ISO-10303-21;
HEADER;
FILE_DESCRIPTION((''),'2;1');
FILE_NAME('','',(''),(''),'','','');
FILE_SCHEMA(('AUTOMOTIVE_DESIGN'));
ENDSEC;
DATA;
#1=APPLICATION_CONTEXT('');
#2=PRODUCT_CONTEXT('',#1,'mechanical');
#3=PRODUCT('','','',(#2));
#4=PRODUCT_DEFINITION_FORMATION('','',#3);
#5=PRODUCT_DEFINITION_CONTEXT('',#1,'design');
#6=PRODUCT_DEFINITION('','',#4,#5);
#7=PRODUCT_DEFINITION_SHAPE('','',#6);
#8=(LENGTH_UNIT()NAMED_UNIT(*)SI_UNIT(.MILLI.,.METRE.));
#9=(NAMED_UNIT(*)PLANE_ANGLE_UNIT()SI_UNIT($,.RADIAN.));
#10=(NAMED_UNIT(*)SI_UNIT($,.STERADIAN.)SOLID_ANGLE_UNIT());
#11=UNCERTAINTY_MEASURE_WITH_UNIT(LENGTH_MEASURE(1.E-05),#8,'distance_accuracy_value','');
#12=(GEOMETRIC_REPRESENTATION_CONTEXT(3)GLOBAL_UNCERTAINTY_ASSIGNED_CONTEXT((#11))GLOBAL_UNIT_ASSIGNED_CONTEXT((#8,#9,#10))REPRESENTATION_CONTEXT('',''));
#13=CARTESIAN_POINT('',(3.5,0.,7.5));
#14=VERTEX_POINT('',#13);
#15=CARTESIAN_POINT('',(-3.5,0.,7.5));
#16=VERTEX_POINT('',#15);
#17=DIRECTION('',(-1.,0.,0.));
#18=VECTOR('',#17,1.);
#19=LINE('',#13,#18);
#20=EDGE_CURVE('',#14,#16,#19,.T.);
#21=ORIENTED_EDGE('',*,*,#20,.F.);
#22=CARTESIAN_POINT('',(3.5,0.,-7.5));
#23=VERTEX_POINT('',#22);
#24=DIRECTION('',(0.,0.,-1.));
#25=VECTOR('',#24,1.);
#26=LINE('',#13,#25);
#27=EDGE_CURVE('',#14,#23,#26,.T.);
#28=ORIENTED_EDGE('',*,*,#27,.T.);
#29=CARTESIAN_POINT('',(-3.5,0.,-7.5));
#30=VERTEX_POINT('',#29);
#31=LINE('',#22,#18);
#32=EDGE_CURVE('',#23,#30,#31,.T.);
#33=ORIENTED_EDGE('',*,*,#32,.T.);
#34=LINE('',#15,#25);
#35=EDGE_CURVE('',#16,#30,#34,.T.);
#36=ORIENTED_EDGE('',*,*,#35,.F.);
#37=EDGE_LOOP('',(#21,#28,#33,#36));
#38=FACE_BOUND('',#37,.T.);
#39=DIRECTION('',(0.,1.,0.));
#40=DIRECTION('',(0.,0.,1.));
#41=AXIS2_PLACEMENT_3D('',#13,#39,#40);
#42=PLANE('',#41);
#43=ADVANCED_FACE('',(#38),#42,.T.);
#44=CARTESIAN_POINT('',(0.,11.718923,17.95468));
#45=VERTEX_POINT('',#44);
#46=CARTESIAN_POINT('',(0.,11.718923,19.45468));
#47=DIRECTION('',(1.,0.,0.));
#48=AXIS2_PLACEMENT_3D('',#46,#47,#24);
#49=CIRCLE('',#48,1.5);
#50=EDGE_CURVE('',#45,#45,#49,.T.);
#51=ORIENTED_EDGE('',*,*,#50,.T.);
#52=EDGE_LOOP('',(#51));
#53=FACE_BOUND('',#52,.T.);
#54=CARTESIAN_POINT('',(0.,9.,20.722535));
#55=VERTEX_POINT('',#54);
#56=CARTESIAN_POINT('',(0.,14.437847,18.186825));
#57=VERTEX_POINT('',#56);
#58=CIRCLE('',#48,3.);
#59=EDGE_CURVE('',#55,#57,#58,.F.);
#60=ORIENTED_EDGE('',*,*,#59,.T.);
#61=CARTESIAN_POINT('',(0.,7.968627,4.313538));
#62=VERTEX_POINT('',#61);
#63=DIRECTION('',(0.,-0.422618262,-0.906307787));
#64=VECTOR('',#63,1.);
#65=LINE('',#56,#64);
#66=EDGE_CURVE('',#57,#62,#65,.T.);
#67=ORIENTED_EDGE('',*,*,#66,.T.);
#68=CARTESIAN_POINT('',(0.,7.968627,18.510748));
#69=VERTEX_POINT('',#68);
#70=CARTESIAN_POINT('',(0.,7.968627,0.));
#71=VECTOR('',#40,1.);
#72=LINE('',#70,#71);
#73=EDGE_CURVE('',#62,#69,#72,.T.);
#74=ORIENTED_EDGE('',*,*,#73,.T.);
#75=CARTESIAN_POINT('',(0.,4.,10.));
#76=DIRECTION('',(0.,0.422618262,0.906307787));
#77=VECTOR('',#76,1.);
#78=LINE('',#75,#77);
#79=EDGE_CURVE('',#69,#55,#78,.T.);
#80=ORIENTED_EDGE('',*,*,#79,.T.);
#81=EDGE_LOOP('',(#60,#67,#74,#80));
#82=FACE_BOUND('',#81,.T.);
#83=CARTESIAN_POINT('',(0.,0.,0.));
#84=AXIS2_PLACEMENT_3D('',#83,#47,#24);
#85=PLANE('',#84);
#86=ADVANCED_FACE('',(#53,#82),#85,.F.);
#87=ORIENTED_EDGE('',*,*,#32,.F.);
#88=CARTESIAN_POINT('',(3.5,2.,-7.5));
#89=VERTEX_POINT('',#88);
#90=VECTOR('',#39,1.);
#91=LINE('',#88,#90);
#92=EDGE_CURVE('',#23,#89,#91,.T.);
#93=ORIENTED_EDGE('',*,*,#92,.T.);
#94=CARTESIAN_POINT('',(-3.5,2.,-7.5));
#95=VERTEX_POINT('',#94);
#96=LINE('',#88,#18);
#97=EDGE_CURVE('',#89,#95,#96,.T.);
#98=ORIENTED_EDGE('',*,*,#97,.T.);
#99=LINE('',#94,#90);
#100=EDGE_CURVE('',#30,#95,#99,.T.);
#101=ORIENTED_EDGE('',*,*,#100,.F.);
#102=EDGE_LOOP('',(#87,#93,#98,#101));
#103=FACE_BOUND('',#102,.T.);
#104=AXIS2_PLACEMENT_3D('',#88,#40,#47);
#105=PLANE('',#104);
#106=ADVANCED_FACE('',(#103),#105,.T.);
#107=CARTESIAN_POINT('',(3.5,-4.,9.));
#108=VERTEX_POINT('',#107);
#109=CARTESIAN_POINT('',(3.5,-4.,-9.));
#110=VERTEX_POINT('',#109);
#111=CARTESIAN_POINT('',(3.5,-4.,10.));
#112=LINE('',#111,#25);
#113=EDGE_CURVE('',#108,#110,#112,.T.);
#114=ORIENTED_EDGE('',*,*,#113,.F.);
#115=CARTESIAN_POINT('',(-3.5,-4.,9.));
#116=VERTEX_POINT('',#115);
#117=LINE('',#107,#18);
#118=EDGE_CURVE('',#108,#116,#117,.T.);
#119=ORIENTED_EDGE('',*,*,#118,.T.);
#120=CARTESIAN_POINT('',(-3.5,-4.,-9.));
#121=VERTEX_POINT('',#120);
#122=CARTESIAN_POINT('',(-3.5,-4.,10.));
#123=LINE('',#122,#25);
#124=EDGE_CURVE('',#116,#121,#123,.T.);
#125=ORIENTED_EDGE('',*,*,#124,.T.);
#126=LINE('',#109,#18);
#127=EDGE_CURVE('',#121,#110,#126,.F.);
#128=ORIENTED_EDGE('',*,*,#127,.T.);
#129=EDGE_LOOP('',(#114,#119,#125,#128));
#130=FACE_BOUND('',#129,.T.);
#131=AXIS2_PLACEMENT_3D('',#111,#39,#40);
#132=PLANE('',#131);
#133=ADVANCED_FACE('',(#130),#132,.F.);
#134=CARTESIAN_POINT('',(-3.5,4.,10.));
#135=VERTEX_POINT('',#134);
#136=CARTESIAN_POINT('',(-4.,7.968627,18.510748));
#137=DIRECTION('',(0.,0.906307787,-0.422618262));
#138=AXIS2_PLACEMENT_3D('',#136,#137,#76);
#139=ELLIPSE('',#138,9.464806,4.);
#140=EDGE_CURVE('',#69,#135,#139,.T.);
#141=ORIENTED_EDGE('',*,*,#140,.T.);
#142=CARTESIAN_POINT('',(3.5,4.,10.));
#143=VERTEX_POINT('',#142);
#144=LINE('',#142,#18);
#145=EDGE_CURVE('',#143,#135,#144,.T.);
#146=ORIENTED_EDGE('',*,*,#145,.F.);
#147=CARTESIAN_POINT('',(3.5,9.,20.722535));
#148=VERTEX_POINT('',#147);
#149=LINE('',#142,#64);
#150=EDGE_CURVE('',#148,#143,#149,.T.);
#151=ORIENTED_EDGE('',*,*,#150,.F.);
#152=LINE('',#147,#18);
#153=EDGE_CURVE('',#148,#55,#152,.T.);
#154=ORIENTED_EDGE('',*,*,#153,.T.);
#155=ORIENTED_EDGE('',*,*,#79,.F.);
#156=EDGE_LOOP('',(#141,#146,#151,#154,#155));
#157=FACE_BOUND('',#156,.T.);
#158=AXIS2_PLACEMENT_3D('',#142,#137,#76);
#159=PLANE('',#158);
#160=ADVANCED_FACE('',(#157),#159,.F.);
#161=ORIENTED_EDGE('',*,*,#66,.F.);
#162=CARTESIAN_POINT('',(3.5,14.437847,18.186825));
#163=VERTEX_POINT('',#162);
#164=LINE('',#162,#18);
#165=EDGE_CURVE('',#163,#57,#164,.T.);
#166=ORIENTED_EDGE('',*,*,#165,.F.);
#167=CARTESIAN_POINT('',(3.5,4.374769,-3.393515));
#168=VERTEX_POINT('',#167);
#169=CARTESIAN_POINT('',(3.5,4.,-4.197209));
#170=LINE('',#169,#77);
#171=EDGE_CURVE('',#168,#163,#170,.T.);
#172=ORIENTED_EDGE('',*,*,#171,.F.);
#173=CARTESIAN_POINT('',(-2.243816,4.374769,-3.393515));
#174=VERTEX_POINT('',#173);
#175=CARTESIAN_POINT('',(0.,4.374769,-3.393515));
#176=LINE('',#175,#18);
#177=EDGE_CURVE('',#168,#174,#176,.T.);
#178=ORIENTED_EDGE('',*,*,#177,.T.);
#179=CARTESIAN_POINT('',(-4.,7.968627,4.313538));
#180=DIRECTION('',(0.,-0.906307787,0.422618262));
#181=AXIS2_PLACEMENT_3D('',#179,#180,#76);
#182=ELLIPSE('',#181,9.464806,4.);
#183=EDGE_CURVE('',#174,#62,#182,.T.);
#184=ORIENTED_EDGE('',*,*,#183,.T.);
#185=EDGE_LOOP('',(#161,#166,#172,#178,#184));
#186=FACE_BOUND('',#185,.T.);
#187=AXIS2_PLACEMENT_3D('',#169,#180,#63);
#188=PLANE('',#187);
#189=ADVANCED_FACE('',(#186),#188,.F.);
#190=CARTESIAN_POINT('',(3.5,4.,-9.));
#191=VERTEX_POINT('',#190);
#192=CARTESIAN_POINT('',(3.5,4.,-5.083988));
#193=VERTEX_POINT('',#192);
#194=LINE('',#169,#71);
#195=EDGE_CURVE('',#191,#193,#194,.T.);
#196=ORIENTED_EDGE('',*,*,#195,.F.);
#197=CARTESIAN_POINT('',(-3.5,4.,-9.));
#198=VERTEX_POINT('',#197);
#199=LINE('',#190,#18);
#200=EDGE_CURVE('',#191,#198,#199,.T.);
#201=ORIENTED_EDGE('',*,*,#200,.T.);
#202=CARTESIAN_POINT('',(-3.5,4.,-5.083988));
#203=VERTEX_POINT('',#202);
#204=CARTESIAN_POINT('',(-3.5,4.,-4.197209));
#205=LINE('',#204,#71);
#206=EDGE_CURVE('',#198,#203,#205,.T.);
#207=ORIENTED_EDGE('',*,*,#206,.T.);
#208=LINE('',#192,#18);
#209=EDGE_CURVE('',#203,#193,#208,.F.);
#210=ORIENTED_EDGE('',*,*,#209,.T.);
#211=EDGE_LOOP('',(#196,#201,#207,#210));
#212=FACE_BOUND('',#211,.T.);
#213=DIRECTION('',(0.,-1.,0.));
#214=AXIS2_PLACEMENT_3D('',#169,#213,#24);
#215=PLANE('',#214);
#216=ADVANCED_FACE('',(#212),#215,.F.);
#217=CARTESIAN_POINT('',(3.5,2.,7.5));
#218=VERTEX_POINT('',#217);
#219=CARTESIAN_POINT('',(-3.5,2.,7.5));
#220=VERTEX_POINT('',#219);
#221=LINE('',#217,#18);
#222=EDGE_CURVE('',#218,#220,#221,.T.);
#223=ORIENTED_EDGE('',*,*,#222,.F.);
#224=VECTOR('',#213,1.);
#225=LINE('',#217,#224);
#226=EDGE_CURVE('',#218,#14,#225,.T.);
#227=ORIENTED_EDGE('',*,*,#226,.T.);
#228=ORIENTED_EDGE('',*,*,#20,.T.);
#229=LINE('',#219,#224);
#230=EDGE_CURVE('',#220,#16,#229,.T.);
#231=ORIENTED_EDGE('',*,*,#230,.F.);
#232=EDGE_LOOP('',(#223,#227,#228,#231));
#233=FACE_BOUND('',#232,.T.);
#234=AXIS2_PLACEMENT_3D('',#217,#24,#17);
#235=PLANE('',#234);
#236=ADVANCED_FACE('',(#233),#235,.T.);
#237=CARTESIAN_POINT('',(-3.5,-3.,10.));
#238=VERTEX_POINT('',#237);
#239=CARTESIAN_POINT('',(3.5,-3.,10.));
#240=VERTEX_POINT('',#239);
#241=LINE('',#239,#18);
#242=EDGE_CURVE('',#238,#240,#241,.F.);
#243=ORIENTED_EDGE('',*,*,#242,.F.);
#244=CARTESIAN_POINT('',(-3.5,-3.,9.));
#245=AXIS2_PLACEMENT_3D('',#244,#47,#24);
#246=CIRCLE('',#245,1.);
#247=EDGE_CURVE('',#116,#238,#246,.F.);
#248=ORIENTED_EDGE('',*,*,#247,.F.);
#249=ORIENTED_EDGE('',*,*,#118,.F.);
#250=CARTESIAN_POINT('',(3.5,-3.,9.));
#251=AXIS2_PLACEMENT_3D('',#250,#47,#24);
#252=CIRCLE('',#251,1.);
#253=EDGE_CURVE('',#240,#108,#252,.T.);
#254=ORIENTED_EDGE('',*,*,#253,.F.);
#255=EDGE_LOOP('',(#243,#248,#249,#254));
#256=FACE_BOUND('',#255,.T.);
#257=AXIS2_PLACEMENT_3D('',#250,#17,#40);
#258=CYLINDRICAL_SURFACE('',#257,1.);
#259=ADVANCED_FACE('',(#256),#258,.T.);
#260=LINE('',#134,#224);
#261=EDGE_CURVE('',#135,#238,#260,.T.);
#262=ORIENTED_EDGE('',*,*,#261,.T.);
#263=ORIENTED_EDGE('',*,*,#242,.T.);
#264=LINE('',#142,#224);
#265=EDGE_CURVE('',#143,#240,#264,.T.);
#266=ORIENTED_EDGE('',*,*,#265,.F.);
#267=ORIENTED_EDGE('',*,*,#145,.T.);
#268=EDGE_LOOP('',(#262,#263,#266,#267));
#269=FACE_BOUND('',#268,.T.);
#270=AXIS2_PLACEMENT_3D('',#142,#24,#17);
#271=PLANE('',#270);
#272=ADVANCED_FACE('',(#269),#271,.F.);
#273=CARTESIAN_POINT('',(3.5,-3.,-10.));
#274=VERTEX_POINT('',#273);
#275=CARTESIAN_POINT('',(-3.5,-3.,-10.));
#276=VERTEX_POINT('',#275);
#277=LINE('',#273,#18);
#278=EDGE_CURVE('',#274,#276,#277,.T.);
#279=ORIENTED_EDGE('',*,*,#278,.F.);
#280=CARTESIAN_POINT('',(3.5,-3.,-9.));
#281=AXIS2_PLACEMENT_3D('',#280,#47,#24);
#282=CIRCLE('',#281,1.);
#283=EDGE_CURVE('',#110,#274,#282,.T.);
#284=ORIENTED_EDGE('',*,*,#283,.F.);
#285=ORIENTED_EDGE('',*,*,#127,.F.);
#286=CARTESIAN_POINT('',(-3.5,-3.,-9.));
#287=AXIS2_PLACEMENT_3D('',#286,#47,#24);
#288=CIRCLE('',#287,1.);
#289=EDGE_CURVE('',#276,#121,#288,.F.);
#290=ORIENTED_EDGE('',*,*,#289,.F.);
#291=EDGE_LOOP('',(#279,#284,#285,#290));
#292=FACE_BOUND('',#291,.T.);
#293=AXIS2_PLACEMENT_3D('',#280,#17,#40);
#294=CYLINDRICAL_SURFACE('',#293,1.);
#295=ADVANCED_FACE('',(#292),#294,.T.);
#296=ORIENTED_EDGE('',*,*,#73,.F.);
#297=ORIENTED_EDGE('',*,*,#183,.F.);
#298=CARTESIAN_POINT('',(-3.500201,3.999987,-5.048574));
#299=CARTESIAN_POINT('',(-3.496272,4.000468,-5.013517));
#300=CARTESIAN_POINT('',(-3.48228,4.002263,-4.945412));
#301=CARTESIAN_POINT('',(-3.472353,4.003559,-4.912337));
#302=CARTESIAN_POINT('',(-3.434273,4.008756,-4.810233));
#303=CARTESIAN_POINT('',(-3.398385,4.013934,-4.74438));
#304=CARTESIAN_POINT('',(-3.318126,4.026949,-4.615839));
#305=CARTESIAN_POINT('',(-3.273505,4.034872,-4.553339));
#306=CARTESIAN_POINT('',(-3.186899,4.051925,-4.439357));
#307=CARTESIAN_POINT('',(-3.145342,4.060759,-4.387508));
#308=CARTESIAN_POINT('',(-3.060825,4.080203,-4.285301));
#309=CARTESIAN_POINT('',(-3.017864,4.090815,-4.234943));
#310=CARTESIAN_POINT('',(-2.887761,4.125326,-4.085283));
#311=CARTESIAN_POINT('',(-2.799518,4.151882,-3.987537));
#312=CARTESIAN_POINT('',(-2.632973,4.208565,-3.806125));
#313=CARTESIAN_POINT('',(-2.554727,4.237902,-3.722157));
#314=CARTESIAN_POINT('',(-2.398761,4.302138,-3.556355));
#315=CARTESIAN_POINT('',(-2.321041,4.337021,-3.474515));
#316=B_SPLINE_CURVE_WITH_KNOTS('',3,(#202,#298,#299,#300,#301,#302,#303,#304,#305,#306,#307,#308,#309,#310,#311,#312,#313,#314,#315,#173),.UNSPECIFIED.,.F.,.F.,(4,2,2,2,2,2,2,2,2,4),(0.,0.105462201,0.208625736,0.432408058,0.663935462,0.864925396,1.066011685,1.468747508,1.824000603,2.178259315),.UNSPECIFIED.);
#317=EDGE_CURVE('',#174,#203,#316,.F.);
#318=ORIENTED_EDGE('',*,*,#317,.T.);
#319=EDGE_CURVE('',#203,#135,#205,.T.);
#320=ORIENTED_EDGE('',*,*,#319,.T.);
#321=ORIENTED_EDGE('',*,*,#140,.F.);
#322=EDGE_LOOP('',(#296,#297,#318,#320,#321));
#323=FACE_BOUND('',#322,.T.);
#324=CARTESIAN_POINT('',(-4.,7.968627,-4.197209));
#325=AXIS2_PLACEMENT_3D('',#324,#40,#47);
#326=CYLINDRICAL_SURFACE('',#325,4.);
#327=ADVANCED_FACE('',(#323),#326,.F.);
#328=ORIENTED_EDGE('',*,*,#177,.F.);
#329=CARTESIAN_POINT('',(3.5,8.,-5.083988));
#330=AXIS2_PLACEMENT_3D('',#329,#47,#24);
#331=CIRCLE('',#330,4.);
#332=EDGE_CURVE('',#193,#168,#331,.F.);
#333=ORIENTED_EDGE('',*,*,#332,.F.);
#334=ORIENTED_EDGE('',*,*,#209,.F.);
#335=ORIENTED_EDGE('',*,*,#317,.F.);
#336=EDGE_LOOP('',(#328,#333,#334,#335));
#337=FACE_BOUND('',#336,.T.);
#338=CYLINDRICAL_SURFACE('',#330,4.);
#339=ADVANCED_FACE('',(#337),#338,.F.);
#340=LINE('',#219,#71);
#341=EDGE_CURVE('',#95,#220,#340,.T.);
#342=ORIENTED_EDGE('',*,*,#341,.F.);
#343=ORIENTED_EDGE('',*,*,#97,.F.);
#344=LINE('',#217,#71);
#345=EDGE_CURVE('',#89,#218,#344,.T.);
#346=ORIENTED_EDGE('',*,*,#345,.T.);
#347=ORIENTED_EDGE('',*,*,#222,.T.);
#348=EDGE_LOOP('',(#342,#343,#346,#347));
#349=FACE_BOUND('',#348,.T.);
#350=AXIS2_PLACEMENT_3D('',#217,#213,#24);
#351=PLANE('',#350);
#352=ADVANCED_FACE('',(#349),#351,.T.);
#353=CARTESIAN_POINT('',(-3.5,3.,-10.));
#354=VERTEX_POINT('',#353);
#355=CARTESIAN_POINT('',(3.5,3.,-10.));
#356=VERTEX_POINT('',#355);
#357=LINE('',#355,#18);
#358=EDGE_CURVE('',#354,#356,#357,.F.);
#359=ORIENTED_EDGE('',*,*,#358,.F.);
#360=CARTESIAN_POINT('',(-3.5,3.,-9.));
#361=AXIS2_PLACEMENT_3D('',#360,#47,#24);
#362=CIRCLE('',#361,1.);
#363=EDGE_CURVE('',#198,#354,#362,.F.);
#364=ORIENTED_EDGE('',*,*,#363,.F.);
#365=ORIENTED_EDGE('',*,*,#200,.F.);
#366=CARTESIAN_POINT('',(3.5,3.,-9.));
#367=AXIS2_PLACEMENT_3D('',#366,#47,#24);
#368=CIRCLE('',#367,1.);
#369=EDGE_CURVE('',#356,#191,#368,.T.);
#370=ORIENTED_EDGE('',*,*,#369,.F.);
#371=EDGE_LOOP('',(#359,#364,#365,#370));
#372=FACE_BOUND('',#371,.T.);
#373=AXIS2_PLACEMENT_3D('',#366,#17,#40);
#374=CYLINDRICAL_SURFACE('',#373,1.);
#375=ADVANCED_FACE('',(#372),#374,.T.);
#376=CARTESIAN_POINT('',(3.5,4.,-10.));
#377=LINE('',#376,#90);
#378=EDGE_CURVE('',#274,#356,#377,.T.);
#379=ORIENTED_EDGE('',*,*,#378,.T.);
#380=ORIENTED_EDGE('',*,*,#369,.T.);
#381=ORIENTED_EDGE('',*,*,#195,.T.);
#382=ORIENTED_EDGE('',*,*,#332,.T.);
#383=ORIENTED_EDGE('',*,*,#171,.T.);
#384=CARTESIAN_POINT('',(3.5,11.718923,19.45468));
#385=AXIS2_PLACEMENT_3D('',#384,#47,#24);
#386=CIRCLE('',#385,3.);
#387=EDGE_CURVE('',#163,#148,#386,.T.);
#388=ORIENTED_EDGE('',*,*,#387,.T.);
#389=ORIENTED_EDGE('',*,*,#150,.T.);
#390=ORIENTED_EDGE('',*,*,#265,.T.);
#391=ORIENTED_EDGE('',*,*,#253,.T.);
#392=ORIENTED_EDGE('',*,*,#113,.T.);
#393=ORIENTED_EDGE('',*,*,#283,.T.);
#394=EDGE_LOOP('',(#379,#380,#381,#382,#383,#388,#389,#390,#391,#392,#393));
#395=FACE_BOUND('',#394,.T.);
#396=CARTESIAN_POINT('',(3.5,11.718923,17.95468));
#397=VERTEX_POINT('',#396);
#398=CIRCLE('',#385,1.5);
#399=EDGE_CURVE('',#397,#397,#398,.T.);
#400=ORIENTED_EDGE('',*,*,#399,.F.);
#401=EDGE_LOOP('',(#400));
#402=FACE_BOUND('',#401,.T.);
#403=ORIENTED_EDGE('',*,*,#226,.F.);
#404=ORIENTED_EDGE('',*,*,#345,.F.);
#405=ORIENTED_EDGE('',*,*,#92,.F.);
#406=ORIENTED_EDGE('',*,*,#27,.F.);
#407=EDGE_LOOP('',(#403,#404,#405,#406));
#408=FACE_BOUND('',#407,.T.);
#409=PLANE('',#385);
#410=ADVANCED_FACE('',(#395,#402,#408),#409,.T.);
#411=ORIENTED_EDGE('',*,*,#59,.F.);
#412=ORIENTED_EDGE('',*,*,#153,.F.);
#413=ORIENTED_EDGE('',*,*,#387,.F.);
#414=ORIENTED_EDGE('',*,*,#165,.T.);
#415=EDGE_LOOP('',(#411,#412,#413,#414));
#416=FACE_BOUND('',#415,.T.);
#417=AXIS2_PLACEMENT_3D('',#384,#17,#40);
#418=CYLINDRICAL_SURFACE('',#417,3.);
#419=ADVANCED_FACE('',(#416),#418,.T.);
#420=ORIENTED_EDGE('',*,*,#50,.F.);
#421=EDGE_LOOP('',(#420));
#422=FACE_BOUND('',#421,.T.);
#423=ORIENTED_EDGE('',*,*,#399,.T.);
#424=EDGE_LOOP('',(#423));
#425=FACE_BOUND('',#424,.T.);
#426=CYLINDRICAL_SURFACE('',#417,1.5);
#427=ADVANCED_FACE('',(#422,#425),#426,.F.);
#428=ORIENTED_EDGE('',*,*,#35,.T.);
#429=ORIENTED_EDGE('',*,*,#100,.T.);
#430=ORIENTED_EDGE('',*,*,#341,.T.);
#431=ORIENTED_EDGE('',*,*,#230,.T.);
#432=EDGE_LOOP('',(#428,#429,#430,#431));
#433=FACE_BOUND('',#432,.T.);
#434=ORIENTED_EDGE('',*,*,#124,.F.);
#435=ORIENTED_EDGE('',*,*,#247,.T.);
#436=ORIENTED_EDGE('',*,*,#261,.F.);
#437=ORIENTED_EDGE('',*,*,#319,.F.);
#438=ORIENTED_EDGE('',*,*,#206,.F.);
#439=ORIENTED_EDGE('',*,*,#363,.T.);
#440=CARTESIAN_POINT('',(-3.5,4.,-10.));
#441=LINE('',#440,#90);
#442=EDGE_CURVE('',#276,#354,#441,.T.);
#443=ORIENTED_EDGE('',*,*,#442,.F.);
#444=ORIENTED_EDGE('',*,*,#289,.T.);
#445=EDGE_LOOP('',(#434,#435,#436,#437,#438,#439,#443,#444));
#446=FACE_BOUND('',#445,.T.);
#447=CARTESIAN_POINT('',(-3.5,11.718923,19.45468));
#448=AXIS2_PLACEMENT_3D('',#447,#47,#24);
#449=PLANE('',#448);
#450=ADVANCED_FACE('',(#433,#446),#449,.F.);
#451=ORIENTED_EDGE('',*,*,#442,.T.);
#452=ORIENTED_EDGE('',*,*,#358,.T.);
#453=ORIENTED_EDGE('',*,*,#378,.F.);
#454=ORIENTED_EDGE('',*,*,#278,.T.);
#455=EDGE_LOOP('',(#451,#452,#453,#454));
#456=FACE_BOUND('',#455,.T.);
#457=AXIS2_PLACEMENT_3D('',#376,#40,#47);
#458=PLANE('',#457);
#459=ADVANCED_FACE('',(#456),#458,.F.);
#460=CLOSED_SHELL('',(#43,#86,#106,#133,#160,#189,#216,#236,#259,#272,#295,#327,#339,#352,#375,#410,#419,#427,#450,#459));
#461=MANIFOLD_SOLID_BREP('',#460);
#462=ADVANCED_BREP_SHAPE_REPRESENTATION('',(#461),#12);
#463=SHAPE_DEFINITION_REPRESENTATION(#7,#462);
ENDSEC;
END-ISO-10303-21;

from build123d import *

# Parameters (mm, degrees)
CROQUIS1_R              = 1.5
CROQUIS1_W              = 15
CROQUIS1_H              = 2
SALIENTE_EXTRUIR1_DEPTH = 3.5
CORTAR_EXTRUIR1_START   = -3.5
CORTAR_EXTRUIR1_DEPTH   = 3.5
REDONDEO1_R             = 4
REDONDEO3_R             = 1


with BuildPart() as part:
    # Croquis1 → Saliente-Extruir1 (new, symmetric)
    with BuildSketch(Plane(origin=(0, 0, 0), x_dir=(0, 0, -1), z_dir=(1, 0, 0))):
        with BuildLine():
            Line((4.197209499, 4), (-18.186825032, 14.437846722))
            ThreePointArc((-18.186825032, 14.437846722), (-22.173603178, 12.986778146), (-20.722534603, 9))
            Line((-20.722534603, 9), (-10, 4))
            Line((-10, 4), (-10, -4))
            Line((-10, -4), (10, -4))
            Line((10, -4), (10, 4))
            Line((10, 4), (4.197209499, 4))
        make_face()
        with Locations((-19.454679817, 11.718923361)):
            Circle(CROQUIS1_R, mode=Mode.SUBTRACT)
        with Locations((0, 1)):
            Rectangle(CROQUIS1_W, CROQUIS1_H, mode=Mode.SUBTRACT)
    extrude(amount=SALIENTE_EXTRUIR1_DEPTH, both=True)

    # Croquis2 → Cortar-Extruir1 (cut)
    with BuildSketch(Plane.ZY.offset(3.5).offset(CORTAR_EXTRUIR1_START)):
        with BuildLine():
            Line((-4.197209499, 4), (10, 4))
            Line((10, 4), (20.722534603, 9))
            ThreePointArc((20.722534603, 9), (22.173603178, 12.986778146), (18.186825032, 14.437846722))
            Line((18.186825032, 14.437846722), (-4.197209499, 4))
        make_face()
    extrude(amount=CORTAR_EXTRUIR1_DEPTH, mode=Mode.SUBTRACT)

    # Redondeo1
    # the kernel refuses this fillet: 4 mm, written as the material it adds along each edge
    with BuildSketch(Plane(origin=(0, 4, -14.118776915), x_dir=(-1, 0, 0), z_dir=(0, 0, 1))) as redondeo1_piece_1_section:
        with BuildLine():
            CenterArc((4, -3.968626967), REDONDEO1_R, 97.180755781, 82.819244219)
            Line((0, -3.968626967), (0, 0))
            Line((0, 0), (3.5, 0))
        make_face()
    redondeo1_piece_1 = extrude(amount=24.118776915, mode=Mode.PRIVATE)
    redondeo1_piece_1 = split(redondeo1_piece_1, bisect_by=Plane(origin=(0, 0.199819207, -12.346723509), z_dir=(0, -0.9063077870366529, 0.42261826174069317)), keep=Keep.TOP, mode=Mode.PRIVATE)
    redondeo1_piece_1 = split(redondeo1_piece_1, bisect_by=Plane(origin=(0, -5.238027515, -9.811013939), z_dir=(0, 0.9063077870366527, -0.4226182617406936)), keep=Keep.TOP, mode=Mode.PRIVATE)
    add(redondeo1_piece_1)
    with BuildSketch(Plane(origin=(0, 4, -14.118776915), x_dir=(-1, 0, 0), z_dir=(0, 0, 1))) as redondeo1_piece_2_section:
        with BuildLine():
            CenterArc((4, -3.968626967), REDONDEO1_R, 97.180755781, 82.819244219)
            Line((0, -3.968626967), (0, 0))
            Line((0, 0), (3.5, 0))
        make_face()
    redondeo1_piece_2 = extrude(amount=34.040344332, mode=Mode.PRIVATE)
    redondeo1_piece_2 = split(redondeo1_piece_2, bisect_by=Plane(origin=(0, 4, 10), z_dir=(0, 0, 1)), keep=Keep.TOP, mode=Mode.PRIVATE)
    redondeo1_piece_2 = split(redondeo1_piece_2, bisect_by=Plane(origin=(0, -5.238027515, -9.811013939), z_dir=(0, 0.9063077870366527, -0.4226182617406936)), keep=Keep.TOP, mode=Mode.PRIVATE)
    add(redondeo1_piece_2)
    # the kernel refuses this fillet: 4 mm, written as the material it adds along each edge
    with BuildSketch(Plane(origin=(-3.5, 4, -4.197209499), x_dir=(0, 0, -1), z_dir=(1, 0, 0))) as redondeo1_2_piece_1_section:
        with BuildLine():
            CenterArc((REDONDEO1_R * 0.221694662643, REDONDEO1_R), REDONDEO1_R, 245, 25)
            Line((-REDONDEO1_R * 0.200923599098, REDONDEO1_R * 0.0936922129633), (0, 0))
            Line((0, 0), (REDONDEO1_R * 0.221694662643, 0))
        make_face()
    redondeo1_2_piece_1 = extrude(amount=7, mode=Mode.PRIVATE)
    redondeo1_2_piece_1 = redondeo1_2_piece_1 - Plane(origin=(-4, 7.968626967, -4.197209499), x_dir=(0.12499999999999983, -0.9921567416492215, 0), z_dir=(0, 0, -1)) * Cylinder(4, 18, mode=Mode.PRIVATE)
    add(redondeo1_2_piece_1)

    # Redondeo3
    redondeo3_edges = [part.edges().sort_by_distance(p)[0] for p in [
        (0, -4, -10),
        (0, -4, 10),
        (0, 4, -10),
    ]]
    fillet(redondeo3_edges, radius=REDONDEO3_R)


solid = part.part
